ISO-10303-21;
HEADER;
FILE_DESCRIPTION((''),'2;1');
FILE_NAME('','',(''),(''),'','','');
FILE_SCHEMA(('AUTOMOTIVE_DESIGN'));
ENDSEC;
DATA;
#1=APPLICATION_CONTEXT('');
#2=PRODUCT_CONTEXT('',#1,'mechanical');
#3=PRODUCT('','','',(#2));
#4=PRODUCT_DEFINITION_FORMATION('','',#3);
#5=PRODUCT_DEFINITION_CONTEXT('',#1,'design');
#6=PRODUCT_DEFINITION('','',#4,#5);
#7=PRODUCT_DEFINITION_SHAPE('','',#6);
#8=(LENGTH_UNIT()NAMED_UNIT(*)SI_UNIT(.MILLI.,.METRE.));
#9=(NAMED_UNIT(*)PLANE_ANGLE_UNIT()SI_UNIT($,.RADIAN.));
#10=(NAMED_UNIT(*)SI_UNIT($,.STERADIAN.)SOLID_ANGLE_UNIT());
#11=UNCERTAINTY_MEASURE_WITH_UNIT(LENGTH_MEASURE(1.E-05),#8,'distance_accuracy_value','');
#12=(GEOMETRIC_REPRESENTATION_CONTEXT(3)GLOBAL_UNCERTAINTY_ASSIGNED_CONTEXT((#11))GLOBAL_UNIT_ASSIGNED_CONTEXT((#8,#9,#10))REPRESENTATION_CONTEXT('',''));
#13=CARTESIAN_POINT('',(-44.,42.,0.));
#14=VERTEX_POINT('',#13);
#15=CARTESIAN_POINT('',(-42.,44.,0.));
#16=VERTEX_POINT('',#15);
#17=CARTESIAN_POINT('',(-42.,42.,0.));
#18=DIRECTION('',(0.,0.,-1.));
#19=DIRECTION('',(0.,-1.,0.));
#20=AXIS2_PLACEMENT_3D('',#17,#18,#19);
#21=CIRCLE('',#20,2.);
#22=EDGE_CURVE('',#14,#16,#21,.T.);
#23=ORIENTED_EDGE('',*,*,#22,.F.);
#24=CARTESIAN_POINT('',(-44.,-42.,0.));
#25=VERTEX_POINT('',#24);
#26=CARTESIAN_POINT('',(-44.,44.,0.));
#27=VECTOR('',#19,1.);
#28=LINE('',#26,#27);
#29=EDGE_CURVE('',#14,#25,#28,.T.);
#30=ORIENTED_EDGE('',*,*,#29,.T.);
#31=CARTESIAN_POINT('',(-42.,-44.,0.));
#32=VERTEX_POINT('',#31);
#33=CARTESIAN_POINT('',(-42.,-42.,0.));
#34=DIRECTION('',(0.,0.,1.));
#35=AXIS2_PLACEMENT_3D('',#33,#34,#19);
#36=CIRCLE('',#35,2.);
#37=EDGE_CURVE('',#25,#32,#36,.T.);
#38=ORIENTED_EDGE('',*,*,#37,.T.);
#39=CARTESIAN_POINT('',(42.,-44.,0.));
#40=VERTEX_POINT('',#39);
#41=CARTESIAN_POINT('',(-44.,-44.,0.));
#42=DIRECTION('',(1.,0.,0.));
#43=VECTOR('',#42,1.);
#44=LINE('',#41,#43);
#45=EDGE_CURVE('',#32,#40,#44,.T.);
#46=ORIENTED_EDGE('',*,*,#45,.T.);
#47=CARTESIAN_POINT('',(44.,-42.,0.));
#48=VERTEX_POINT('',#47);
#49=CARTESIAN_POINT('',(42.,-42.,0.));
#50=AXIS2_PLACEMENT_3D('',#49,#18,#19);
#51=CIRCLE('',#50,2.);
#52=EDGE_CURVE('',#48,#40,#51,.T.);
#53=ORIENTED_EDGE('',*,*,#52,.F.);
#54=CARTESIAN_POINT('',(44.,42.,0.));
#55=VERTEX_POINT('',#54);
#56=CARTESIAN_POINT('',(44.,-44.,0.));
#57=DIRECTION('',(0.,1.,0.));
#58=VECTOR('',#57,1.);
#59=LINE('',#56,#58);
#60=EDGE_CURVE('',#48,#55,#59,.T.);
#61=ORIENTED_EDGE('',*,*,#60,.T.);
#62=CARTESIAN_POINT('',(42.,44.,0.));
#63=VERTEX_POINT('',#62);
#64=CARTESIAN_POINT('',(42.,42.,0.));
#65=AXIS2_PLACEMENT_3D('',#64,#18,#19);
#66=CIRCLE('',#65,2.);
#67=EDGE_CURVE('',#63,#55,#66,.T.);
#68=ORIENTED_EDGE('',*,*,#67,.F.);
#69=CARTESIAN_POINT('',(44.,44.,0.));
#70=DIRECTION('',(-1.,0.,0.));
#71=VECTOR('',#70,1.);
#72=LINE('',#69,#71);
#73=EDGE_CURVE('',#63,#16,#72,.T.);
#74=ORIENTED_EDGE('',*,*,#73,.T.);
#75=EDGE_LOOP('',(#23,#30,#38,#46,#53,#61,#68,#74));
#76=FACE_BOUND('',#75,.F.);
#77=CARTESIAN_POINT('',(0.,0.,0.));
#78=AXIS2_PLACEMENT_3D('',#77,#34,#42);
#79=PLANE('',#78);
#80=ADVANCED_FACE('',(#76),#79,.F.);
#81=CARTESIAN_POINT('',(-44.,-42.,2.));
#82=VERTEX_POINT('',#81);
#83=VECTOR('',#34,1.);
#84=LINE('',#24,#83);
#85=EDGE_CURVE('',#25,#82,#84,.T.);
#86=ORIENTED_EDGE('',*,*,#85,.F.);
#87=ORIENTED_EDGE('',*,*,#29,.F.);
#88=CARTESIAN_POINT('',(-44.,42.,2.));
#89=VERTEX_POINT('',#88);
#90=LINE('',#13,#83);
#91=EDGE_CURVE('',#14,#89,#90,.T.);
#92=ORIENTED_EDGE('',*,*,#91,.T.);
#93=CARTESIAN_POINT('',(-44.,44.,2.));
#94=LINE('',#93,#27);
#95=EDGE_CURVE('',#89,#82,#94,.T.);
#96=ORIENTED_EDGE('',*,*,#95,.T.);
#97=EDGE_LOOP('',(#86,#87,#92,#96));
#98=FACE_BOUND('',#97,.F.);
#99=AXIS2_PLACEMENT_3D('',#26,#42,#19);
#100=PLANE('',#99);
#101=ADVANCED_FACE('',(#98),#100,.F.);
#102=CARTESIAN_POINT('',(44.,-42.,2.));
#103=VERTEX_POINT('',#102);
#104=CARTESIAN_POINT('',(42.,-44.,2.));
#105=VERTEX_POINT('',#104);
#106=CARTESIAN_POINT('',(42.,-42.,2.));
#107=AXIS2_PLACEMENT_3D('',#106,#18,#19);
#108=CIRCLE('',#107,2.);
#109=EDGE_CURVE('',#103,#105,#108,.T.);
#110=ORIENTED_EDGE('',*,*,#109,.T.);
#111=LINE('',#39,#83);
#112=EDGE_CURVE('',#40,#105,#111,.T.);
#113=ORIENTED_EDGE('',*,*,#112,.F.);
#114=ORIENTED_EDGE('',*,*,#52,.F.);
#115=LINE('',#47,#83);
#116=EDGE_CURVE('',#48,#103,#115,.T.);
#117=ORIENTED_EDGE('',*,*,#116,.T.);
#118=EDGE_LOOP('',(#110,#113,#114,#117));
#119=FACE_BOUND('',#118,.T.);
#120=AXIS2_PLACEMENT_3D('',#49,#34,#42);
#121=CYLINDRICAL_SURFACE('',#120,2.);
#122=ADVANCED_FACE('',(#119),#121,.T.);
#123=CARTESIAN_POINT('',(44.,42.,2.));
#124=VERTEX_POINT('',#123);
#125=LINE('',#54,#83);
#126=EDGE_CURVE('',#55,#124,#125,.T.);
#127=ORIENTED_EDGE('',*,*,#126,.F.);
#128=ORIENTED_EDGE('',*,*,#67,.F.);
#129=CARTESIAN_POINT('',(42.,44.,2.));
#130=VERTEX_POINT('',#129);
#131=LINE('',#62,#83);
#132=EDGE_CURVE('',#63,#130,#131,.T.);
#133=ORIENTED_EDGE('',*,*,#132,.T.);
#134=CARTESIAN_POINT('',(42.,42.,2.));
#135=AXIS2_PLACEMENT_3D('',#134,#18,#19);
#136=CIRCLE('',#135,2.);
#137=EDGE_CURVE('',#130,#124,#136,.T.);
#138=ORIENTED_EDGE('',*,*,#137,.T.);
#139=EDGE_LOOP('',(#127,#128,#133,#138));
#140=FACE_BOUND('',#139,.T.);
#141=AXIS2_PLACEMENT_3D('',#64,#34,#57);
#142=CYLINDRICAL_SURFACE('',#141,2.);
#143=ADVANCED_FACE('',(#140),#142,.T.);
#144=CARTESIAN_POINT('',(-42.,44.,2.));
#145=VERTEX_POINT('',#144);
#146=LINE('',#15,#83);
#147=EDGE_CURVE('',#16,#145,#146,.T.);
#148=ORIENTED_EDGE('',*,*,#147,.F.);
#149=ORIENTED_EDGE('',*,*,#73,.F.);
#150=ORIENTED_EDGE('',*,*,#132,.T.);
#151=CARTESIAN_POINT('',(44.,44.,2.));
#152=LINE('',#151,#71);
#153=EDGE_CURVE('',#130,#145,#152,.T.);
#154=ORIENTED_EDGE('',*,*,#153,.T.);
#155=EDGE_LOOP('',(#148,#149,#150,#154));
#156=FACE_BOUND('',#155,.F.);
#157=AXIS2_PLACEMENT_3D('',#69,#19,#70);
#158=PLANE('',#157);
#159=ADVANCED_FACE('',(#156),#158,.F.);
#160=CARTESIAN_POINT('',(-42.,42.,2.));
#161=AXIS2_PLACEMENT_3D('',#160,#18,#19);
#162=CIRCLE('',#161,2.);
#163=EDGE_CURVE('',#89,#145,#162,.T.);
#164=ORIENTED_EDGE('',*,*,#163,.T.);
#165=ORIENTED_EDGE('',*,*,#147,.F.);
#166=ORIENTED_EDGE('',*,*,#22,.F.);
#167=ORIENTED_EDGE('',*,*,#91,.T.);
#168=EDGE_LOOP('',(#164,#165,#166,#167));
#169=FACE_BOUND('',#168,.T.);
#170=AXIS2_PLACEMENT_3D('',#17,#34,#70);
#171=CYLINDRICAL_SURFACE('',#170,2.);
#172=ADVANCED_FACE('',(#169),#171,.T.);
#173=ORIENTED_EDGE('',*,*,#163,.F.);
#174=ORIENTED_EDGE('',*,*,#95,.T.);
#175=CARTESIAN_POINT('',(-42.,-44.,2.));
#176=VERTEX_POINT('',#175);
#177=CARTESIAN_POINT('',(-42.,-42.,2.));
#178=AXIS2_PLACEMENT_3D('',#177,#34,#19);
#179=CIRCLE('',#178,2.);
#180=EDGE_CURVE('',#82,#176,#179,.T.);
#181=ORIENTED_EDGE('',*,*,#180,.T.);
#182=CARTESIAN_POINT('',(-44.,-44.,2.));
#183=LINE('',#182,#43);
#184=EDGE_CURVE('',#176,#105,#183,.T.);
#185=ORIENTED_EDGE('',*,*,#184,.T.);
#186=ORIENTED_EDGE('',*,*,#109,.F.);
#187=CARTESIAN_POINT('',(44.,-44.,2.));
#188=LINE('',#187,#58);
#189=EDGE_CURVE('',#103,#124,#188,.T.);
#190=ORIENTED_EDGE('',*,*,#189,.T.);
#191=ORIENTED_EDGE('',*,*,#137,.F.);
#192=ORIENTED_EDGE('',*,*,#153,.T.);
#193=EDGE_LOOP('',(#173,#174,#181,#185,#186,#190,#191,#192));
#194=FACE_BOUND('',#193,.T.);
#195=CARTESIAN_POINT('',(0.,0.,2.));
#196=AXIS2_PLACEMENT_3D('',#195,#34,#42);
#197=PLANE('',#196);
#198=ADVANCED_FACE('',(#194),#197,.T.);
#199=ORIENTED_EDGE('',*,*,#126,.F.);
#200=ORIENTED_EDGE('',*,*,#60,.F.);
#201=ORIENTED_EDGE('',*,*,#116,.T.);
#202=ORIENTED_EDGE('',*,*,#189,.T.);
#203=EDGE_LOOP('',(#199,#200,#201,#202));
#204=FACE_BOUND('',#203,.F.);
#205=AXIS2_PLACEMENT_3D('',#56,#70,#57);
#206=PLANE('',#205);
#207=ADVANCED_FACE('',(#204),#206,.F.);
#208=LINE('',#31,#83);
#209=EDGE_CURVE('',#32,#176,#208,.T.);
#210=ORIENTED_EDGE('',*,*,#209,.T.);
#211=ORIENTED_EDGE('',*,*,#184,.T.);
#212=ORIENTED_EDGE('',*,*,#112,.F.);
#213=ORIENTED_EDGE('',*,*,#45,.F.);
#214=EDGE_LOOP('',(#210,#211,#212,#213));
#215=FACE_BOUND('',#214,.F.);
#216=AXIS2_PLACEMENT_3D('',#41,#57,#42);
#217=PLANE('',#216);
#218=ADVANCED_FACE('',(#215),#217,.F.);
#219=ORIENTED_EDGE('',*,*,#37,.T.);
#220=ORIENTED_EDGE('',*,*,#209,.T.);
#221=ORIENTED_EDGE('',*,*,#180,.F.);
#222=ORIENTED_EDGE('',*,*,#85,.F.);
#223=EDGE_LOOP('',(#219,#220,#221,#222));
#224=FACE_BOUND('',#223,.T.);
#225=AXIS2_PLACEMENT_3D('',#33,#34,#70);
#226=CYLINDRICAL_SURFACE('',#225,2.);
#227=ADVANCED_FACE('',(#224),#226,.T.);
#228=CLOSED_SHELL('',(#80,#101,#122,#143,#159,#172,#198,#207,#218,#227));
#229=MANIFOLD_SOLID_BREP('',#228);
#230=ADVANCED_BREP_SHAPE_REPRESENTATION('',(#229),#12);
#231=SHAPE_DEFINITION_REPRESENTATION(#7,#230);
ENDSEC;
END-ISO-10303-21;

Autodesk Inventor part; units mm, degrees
ref_plane "YZ Plane" through (0, 0, 0) normal (1, 0, 0) x (0, 1, 0)
ref_plane "XZ Plane" through (0, 0, 0) normal (0, 1, 0) x (-1, 0, 0)
ref_plane "XY Plane" through (0, 0, 0) normal (0, 0, 1) x (1, 0, 0)
sketch "Sketch1" plane through (0, 0, 0) normal (0, 0, 1) x (1, 0, 0)
  line L0 (-44, -44) -> (44, -44)
  line L1 (44, -44) -> (44, 44)
  line L2 (44, 44) -> (-44, 44)
  line L3 (-44, 44) -> (-44, -44)
  line L4 (-44, -44) -> (44, 44) construction
  line L5 (44, -44) -> (-44, 44) construction
  point P0 (0, 0)
  dimension "d154" = 88
  dimension "d155" = 88
extrude "Plate5" add sketch "Sketch1" along normal blind 2
fillet "Corner Round1" radius 2 4 edges at (44, 44, 1) (-44, 44, 1) (-44, -44, 1) (44, -44, 1)
properties part number "PRS 1665 DrSysB CUP 1_D1200" material "Stainless Steel"
